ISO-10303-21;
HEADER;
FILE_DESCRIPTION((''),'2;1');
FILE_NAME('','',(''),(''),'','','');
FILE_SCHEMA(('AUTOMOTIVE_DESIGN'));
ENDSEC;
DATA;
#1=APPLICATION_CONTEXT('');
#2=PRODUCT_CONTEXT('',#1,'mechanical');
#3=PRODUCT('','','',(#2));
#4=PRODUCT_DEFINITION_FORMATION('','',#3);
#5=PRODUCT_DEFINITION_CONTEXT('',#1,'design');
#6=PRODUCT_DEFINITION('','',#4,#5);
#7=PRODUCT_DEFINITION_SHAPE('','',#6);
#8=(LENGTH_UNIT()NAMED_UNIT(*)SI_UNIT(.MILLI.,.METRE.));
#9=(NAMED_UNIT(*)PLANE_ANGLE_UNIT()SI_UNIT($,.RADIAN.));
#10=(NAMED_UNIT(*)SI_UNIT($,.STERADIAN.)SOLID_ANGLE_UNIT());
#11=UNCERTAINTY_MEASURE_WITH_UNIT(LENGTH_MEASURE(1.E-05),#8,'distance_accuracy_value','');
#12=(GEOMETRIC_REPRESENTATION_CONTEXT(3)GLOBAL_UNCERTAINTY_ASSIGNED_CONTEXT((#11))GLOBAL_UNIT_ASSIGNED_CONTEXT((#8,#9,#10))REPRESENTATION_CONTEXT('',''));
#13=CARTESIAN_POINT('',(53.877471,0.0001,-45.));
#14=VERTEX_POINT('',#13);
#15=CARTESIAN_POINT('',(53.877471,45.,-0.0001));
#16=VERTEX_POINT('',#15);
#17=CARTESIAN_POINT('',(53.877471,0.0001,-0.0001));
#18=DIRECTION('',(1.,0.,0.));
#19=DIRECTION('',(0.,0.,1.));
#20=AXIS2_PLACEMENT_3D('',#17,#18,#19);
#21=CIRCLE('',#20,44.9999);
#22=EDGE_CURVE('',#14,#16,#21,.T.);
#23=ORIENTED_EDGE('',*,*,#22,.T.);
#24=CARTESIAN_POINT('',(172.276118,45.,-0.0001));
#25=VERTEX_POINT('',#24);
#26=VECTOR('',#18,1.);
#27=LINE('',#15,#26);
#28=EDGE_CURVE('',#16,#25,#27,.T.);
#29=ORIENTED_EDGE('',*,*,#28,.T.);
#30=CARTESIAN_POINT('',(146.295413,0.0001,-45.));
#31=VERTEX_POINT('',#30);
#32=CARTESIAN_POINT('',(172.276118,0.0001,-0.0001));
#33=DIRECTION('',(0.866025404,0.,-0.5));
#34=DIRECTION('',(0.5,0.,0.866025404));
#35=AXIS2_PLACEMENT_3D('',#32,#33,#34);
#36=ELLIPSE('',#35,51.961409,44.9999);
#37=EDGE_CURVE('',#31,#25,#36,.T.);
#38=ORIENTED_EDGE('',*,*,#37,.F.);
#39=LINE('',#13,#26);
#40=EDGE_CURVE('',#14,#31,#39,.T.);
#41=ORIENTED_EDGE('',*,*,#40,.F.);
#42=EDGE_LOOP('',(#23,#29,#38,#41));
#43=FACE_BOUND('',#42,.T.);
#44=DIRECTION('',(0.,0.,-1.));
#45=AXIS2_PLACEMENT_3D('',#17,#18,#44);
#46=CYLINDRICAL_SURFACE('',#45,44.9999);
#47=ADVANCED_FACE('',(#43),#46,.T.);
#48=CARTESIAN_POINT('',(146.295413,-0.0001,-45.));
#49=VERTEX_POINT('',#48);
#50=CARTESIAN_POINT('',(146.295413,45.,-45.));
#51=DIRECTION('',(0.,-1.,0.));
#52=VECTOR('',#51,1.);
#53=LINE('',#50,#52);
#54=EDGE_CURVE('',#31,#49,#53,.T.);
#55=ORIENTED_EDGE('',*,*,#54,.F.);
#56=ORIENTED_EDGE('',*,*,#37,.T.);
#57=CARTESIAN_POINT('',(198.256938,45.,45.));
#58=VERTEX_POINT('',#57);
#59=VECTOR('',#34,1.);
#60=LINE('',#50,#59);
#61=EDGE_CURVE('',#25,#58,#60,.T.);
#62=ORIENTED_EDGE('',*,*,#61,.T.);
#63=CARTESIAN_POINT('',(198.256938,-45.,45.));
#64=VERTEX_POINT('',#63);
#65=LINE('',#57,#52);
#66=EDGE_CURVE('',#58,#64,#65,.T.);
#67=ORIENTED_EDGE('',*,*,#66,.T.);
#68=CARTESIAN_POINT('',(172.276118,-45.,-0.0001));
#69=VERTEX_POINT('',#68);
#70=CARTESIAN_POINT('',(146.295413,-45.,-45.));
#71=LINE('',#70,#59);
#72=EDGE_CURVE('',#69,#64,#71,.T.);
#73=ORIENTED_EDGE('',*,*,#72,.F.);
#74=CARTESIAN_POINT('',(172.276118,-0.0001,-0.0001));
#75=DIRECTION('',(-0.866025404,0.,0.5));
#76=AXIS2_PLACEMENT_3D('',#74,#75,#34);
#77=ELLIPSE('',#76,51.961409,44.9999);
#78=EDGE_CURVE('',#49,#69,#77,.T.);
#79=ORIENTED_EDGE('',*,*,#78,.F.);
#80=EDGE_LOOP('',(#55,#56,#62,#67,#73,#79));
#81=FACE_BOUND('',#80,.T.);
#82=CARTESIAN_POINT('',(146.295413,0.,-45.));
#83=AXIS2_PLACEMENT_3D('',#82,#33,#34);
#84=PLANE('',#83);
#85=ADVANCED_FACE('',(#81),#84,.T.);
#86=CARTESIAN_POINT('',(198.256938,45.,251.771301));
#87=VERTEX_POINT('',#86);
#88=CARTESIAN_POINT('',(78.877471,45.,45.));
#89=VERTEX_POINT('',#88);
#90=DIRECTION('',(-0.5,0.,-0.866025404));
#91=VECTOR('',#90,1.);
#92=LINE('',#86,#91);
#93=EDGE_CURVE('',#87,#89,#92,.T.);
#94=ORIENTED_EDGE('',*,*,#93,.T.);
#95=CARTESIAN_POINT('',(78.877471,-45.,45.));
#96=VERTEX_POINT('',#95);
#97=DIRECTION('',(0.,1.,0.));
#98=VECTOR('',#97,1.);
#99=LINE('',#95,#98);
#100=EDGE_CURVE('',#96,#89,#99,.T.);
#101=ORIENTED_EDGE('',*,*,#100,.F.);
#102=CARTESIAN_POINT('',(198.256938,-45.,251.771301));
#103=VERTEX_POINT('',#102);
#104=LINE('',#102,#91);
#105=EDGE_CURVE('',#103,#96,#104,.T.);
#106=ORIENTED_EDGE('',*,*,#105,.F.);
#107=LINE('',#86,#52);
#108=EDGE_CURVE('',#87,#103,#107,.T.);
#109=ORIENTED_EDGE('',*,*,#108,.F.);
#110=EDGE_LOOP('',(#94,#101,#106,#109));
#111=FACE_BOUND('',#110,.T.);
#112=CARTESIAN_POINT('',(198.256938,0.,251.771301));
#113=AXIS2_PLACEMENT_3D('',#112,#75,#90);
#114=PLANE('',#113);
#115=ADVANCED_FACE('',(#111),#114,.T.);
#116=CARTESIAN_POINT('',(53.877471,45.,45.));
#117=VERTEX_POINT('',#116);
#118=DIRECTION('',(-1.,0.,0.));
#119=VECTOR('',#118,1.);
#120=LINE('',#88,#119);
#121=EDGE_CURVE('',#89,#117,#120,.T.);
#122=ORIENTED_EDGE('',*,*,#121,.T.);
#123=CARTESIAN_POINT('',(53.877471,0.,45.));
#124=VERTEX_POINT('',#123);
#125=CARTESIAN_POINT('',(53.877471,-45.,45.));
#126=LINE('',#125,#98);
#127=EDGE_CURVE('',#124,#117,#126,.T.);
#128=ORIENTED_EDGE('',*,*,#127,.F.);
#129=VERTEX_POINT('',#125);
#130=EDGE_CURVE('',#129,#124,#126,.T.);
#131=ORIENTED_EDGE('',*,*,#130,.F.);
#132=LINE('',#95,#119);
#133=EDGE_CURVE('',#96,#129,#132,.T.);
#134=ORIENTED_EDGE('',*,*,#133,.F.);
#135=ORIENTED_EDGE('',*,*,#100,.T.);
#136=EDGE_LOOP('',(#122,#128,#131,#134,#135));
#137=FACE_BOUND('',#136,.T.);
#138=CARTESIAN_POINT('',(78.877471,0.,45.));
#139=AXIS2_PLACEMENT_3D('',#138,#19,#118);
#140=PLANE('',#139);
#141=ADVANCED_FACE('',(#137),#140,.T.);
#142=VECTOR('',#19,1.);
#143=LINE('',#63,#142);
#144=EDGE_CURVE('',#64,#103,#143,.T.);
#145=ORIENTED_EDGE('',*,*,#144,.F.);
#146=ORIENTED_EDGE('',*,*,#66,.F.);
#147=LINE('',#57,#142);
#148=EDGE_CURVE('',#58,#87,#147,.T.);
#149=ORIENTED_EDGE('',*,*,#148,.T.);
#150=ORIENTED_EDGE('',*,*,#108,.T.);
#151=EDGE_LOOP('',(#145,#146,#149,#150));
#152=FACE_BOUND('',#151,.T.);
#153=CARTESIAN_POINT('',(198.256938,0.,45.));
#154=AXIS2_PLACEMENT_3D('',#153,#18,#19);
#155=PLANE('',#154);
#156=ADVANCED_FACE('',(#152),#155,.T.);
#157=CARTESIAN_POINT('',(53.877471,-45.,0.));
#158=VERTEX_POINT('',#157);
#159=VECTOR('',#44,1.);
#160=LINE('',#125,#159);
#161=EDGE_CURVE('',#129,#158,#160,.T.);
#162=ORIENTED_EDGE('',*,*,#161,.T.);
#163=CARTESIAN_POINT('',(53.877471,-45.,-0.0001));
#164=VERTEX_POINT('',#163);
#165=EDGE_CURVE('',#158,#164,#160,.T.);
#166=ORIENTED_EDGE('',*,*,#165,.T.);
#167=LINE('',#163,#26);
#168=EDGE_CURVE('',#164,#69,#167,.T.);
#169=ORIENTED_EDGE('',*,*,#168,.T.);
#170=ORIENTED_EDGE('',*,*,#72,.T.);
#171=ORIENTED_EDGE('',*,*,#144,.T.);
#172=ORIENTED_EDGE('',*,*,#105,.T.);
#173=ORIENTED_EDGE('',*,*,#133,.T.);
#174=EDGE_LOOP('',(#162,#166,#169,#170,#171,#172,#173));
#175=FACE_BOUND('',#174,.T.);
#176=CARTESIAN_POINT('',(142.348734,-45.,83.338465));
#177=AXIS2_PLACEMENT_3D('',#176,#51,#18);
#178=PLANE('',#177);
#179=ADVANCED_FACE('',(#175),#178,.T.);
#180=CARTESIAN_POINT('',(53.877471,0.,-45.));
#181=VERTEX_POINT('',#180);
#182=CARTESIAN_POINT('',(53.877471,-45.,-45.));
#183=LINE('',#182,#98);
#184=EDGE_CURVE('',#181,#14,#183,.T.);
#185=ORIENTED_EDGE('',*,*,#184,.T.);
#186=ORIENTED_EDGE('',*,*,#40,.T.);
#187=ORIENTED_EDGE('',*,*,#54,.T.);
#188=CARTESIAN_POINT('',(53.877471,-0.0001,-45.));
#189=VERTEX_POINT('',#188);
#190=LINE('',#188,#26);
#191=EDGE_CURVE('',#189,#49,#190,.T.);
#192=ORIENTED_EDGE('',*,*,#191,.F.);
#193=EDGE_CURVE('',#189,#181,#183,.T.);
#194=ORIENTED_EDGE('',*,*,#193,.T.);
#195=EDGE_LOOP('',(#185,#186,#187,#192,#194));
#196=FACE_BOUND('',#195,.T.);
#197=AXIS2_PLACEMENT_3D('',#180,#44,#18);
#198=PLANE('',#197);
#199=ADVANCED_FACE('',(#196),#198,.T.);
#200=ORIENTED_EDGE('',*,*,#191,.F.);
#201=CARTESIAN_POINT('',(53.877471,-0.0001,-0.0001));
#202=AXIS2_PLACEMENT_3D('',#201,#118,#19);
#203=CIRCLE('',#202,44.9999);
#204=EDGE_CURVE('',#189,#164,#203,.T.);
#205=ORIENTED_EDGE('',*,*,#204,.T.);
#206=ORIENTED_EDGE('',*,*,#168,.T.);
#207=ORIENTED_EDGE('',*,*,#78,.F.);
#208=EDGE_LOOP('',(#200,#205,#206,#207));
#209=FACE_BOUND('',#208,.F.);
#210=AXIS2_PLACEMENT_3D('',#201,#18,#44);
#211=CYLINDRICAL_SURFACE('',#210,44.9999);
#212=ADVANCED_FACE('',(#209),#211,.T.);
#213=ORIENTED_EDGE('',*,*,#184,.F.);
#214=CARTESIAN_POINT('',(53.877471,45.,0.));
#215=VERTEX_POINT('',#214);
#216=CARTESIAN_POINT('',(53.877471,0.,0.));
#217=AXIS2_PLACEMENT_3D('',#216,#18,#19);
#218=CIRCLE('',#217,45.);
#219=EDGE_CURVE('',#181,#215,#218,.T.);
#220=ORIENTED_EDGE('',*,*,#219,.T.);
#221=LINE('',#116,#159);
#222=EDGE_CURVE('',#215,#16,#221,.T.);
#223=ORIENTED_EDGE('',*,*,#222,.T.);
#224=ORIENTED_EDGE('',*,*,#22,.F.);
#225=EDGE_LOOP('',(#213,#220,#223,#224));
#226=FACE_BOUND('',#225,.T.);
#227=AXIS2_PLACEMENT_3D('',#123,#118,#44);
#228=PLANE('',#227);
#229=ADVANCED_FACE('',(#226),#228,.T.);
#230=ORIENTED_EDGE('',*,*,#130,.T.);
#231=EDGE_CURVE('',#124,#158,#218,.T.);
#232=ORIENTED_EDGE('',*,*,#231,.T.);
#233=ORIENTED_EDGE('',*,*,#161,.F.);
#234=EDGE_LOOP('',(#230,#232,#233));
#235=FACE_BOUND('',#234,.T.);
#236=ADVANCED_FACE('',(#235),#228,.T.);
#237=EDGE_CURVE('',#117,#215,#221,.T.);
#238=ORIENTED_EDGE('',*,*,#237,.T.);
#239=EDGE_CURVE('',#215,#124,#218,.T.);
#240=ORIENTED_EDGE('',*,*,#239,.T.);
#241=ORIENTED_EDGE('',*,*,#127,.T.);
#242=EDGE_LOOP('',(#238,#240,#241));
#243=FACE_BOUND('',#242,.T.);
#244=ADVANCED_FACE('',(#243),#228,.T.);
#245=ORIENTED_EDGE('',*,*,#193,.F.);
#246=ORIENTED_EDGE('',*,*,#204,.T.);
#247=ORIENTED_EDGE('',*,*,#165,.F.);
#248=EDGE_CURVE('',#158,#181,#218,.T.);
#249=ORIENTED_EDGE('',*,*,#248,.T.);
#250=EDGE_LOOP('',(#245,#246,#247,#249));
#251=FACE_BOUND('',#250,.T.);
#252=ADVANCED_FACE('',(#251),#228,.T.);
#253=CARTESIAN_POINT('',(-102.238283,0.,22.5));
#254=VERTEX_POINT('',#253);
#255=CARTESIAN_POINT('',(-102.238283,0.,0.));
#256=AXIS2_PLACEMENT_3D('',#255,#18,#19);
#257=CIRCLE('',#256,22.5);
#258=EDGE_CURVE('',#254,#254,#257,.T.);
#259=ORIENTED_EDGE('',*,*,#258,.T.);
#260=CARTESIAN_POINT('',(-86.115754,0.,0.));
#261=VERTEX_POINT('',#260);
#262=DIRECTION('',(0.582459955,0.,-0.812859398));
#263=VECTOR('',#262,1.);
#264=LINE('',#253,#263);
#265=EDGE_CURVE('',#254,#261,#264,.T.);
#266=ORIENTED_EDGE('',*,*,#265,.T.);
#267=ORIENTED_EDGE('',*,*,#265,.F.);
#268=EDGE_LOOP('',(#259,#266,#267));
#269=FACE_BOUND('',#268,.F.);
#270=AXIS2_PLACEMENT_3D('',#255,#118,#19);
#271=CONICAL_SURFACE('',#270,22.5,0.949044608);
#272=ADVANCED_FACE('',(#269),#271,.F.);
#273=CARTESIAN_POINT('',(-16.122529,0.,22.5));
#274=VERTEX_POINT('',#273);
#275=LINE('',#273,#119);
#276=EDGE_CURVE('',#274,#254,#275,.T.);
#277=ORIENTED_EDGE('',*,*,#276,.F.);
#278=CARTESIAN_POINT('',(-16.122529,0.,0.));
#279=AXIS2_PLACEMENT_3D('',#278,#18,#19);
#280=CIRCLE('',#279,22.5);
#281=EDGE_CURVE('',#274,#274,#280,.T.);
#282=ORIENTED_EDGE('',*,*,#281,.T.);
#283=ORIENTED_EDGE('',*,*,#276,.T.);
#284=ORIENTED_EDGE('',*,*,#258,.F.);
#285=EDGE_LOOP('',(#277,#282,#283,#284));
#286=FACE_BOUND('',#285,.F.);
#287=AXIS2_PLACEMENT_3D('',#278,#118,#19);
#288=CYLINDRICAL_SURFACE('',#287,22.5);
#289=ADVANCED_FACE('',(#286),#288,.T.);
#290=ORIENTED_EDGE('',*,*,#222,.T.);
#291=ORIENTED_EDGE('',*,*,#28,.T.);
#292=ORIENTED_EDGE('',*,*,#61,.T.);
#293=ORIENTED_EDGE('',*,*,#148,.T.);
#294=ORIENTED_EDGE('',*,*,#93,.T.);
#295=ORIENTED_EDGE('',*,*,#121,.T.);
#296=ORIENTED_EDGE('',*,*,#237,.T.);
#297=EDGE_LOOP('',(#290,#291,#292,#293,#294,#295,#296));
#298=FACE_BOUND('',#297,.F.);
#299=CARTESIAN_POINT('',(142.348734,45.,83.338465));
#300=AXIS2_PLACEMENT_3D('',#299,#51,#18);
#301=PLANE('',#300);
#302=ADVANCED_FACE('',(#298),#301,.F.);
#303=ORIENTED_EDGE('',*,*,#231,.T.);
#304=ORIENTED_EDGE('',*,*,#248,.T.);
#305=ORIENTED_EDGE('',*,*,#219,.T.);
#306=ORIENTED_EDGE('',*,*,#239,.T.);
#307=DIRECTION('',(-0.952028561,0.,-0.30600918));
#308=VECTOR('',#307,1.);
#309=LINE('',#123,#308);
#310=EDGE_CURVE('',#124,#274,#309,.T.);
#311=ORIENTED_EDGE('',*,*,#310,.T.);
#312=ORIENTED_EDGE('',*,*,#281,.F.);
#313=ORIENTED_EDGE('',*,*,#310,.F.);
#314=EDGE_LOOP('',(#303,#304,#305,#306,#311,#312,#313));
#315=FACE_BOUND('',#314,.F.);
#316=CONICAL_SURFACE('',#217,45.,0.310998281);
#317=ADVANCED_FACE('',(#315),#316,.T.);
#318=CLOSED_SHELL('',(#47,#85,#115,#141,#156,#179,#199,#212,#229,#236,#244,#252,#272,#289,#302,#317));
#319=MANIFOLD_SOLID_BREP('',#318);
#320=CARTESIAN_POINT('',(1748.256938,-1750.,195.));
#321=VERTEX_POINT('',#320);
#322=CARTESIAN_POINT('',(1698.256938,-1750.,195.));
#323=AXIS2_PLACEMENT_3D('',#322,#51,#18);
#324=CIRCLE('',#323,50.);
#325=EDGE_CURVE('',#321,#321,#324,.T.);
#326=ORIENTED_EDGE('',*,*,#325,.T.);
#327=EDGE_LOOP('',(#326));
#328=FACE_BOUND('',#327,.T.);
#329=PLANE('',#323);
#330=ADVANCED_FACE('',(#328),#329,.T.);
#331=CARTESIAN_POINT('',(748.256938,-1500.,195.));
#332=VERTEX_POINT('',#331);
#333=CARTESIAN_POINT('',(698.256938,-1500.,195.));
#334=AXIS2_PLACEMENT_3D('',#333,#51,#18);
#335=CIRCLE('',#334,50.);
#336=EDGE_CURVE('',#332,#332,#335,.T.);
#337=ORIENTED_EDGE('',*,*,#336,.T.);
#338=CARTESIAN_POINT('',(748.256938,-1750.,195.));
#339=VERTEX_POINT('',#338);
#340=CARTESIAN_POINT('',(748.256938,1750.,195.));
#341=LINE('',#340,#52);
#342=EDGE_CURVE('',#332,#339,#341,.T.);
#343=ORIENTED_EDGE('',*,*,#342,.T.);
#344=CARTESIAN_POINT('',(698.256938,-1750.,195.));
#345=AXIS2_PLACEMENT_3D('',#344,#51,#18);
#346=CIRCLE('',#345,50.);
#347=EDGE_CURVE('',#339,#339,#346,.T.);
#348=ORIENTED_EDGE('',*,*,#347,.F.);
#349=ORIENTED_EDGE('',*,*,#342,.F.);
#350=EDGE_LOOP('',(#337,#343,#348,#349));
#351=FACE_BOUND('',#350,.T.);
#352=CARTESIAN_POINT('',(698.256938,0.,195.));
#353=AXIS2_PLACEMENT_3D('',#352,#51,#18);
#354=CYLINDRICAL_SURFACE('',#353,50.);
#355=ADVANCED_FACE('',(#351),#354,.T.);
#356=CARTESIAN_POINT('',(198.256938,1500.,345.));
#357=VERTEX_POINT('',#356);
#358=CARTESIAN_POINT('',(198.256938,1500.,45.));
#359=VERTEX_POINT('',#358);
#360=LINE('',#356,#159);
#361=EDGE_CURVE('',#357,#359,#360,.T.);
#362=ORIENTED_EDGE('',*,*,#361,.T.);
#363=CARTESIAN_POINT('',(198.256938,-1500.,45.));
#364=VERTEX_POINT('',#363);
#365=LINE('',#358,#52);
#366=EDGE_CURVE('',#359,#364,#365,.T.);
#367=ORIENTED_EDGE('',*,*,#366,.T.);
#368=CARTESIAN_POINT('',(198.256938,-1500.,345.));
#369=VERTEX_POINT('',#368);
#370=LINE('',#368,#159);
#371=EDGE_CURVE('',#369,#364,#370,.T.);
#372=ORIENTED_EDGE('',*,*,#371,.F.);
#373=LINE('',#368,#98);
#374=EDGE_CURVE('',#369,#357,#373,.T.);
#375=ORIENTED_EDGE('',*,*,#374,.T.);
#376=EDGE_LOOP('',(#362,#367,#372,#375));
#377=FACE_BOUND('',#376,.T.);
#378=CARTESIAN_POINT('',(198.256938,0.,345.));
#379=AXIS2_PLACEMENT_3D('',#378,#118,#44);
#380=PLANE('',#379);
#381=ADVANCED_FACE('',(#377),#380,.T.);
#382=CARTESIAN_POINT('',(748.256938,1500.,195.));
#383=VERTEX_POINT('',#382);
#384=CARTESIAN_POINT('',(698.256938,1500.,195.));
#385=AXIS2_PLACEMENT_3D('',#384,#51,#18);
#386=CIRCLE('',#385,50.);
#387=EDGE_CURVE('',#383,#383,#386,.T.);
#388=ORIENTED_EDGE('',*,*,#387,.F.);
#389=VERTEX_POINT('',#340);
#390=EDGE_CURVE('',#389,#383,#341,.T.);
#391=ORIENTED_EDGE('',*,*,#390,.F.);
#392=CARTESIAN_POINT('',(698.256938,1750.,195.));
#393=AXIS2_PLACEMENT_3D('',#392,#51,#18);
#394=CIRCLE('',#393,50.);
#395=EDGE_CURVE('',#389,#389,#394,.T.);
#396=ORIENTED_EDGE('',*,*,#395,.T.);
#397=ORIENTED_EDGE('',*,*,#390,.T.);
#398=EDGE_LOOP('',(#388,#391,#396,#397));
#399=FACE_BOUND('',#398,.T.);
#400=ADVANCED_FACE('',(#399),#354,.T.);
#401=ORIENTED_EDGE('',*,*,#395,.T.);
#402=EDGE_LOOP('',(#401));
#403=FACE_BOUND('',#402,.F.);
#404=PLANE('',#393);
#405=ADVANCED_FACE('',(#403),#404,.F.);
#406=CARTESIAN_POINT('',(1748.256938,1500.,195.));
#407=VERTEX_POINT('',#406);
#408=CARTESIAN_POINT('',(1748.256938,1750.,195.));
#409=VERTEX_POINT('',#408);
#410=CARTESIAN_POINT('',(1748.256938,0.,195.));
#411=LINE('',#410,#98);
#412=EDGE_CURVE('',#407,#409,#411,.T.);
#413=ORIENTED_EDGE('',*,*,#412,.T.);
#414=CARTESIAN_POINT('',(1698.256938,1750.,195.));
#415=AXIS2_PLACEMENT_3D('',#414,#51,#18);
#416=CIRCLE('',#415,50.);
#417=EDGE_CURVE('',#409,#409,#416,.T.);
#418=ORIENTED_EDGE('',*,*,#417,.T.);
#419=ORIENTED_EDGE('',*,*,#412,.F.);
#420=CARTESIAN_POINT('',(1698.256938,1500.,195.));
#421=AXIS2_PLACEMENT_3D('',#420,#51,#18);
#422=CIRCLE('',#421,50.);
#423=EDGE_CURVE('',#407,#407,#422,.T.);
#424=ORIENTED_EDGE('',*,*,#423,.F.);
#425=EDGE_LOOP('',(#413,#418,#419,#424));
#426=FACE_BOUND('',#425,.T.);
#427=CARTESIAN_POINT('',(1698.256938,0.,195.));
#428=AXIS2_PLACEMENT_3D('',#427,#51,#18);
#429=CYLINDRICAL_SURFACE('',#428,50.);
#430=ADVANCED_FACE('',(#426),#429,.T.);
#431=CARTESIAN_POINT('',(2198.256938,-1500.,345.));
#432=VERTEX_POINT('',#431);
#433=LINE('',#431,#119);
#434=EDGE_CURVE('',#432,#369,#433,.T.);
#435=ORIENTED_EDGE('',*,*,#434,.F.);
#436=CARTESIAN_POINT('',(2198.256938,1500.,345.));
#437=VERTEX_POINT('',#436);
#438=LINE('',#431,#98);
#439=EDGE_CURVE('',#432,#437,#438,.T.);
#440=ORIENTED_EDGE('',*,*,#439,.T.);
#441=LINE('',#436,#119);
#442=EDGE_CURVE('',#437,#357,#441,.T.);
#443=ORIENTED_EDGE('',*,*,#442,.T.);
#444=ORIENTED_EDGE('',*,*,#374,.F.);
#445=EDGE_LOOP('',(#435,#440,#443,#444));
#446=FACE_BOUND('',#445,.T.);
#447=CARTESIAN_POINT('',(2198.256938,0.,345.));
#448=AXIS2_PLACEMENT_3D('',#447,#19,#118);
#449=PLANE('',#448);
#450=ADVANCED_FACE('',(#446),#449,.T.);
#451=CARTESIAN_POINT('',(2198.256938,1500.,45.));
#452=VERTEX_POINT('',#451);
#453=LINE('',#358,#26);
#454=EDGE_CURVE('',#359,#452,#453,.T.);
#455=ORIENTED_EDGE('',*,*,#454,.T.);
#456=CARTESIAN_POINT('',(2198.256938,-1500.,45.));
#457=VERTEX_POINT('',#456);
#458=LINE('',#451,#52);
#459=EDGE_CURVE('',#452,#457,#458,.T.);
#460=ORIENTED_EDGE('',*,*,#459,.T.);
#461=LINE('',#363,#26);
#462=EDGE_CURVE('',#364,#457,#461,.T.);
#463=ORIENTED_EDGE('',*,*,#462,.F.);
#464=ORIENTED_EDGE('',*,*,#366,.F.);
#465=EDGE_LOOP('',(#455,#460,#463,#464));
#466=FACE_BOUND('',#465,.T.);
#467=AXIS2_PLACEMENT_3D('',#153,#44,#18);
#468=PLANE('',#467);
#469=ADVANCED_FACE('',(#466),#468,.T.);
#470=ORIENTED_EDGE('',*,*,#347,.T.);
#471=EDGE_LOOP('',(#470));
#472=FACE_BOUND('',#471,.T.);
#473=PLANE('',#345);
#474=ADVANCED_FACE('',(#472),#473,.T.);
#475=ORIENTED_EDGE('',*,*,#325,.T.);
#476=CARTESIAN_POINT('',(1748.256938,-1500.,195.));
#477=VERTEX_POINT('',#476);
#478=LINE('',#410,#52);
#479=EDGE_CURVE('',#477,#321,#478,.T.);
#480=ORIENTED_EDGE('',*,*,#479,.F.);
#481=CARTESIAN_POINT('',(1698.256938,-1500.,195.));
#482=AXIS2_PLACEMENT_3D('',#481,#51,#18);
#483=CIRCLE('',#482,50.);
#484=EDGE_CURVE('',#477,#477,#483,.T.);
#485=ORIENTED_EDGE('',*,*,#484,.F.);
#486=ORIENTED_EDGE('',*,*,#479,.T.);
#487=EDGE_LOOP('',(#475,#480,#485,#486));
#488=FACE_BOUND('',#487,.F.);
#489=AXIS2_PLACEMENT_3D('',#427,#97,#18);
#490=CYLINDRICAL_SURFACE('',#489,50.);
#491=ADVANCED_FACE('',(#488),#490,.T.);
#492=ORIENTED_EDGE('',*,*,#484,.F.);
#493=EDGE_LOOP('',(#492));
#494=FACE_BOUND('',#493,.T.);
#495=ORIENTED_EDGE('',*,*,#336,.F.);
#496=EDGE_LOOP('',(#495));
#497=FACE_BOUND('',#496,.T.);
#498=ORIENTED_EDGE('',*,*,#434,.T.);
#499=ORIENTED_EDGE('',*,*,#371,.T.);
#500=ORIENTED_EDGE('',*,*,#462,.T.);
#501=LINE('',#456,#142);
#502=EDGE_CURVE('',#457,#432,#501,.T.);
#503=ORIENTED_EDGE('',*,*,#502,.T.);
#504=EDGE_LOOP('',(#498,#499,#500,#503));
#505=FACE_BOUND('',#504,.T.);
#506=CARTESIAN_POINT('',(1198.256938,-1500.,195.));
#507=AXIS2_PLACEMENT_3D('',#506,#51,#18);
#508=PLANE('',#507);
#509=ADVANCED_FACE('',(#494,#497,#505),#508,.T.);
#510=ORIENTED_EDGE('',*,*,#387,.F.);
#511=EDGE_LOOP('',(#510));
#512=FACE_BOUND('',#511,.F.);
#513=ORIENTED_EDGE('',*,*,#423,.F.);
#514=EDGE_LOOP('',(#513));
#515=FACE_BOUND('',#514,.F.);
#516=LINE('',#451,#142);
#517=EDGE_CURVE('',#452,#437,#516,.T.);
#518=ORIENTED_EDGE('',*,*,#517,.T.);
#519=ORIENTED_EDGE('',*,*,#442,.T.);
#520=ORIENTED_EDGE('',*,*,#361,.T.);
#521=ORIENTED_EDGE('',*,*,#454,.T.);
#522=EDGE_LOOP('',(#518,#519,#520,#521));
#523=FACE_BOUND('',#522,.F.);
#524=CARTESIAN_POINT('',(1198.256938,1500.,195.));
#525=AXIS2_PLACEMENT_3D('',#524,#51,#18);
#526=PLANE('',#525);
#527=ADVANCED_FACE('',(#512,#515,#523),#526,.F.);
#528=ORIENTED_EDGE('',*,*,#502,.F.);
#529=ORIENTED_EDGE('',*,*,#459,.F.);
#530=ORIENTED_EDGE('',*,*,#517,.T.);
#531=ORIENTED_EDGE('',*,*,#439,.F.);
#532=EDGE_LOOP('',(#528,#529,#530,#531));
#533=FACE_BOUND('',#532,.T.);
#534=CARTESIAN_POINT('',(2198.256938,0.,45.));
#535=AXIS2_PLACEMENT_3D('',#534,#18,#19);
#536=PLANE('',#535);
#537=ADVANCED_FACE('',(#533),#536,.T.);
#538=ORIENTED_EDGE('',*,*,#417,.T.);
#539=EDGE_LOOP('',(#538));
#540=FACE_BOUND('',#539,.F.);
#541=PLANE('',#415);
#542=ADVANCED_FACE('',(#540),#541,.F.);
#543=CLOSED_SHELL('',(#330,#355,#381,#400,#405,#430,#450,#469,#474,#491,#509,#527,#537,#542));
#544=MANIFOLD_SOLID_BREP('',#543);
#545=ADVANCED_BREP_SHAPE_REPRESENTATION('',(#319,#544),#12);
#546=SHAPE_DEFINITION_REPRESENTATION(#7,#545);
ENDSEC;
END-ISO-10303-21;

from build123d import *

# Parameters (mm, degrees)
F2_DEPTH = 45
F3_R     = 44.9999
F0_R     = 50
F4_DEPTH = 1500
F5_DEPTH = 1750


# Not quite as in the source:
# - a fillet or chamfer is up to 0.001 mm smaller than in the source, because OpenCascade refuses the exact size
# - a feature names something its author has since deleted; it is built from what else it names


with BuildPart() as f1:
    # F0 (on Front) → F1 (revolve)
    with BuildSketch(Plane.XZ):
        Polygon((53.877471291, 45), (-16.122528709, 22.5), (53.877471291, 22.5), align=None)
        Polygon((-16.122528709, 22.5), (0, 0), (53.877471291, 0), (53.877471291, 22.5), align=None)
        Polygon((-86.1157540445, 0), (0, 0), (-16.122528709, 22.5), (-102.2382827536, 22.5), align=None)
    revolve(axis=Axis((-43.0578770223, 0, 0), (1, 0, 0)))

    # F0 (on Front) → F2 (join, symmetric)
    with BuildSketch(Plane.XZ):
        Polygon((53.877471291, 22.5), (53.877471291, 0), (53.877471291, -45), (146.2954133749, -45), (198.256937602, 45), (198.256937602, 251.7713010311), (78.877471291, 45), (53.877471291, 45), align=None)
    extrude(amount=F2_DEPTH, both=True)

    # F3 (radius 45 in the source; OpenCascade refuses exactly that, so slightly less here)
    f3_edges = [f1.edges().sort_by_distance(p)[0] for p in [
        (100.086442, 45, -45),
        (100.086442, -45, -45),
    ]]
    fillet(f3_edges, radius=F3_R)


with BuildPart() as f4:
    # F0 (on Front) → F4 (new body, symmetric)
    with BuildSketch(Plane.XZ):
        Polygon((198.256937602, 345), (198.256937602, 251.7713010311), (198.256937602, 45), (2198.256937602, 45), (2198.256937602, 135), (2198.256937602, 345), align=None)
        with Locations((698.256937602, 195)):
            Circle(F0_R, mode=Mode.SUBTRACT)
        with Locations((1698.256937602, 195)):
            Circle(F0_R, mode=Mode.SUBTRACT)
    extrude(amount=F4_DEPTH, both=True)

    # F0 (on Front) → F5 (join, symmetric)
    with BuildSketch(Plane.XZ):
        with Locations((1698.256937602, 195)):
            Circle(F0_R)
        with Locations((698.256937602, 195)):
            Circle(F0_R)
    extrude(amount=F5_DEPTH, both=True)


solid = Compound([f1.part, f4.part])
